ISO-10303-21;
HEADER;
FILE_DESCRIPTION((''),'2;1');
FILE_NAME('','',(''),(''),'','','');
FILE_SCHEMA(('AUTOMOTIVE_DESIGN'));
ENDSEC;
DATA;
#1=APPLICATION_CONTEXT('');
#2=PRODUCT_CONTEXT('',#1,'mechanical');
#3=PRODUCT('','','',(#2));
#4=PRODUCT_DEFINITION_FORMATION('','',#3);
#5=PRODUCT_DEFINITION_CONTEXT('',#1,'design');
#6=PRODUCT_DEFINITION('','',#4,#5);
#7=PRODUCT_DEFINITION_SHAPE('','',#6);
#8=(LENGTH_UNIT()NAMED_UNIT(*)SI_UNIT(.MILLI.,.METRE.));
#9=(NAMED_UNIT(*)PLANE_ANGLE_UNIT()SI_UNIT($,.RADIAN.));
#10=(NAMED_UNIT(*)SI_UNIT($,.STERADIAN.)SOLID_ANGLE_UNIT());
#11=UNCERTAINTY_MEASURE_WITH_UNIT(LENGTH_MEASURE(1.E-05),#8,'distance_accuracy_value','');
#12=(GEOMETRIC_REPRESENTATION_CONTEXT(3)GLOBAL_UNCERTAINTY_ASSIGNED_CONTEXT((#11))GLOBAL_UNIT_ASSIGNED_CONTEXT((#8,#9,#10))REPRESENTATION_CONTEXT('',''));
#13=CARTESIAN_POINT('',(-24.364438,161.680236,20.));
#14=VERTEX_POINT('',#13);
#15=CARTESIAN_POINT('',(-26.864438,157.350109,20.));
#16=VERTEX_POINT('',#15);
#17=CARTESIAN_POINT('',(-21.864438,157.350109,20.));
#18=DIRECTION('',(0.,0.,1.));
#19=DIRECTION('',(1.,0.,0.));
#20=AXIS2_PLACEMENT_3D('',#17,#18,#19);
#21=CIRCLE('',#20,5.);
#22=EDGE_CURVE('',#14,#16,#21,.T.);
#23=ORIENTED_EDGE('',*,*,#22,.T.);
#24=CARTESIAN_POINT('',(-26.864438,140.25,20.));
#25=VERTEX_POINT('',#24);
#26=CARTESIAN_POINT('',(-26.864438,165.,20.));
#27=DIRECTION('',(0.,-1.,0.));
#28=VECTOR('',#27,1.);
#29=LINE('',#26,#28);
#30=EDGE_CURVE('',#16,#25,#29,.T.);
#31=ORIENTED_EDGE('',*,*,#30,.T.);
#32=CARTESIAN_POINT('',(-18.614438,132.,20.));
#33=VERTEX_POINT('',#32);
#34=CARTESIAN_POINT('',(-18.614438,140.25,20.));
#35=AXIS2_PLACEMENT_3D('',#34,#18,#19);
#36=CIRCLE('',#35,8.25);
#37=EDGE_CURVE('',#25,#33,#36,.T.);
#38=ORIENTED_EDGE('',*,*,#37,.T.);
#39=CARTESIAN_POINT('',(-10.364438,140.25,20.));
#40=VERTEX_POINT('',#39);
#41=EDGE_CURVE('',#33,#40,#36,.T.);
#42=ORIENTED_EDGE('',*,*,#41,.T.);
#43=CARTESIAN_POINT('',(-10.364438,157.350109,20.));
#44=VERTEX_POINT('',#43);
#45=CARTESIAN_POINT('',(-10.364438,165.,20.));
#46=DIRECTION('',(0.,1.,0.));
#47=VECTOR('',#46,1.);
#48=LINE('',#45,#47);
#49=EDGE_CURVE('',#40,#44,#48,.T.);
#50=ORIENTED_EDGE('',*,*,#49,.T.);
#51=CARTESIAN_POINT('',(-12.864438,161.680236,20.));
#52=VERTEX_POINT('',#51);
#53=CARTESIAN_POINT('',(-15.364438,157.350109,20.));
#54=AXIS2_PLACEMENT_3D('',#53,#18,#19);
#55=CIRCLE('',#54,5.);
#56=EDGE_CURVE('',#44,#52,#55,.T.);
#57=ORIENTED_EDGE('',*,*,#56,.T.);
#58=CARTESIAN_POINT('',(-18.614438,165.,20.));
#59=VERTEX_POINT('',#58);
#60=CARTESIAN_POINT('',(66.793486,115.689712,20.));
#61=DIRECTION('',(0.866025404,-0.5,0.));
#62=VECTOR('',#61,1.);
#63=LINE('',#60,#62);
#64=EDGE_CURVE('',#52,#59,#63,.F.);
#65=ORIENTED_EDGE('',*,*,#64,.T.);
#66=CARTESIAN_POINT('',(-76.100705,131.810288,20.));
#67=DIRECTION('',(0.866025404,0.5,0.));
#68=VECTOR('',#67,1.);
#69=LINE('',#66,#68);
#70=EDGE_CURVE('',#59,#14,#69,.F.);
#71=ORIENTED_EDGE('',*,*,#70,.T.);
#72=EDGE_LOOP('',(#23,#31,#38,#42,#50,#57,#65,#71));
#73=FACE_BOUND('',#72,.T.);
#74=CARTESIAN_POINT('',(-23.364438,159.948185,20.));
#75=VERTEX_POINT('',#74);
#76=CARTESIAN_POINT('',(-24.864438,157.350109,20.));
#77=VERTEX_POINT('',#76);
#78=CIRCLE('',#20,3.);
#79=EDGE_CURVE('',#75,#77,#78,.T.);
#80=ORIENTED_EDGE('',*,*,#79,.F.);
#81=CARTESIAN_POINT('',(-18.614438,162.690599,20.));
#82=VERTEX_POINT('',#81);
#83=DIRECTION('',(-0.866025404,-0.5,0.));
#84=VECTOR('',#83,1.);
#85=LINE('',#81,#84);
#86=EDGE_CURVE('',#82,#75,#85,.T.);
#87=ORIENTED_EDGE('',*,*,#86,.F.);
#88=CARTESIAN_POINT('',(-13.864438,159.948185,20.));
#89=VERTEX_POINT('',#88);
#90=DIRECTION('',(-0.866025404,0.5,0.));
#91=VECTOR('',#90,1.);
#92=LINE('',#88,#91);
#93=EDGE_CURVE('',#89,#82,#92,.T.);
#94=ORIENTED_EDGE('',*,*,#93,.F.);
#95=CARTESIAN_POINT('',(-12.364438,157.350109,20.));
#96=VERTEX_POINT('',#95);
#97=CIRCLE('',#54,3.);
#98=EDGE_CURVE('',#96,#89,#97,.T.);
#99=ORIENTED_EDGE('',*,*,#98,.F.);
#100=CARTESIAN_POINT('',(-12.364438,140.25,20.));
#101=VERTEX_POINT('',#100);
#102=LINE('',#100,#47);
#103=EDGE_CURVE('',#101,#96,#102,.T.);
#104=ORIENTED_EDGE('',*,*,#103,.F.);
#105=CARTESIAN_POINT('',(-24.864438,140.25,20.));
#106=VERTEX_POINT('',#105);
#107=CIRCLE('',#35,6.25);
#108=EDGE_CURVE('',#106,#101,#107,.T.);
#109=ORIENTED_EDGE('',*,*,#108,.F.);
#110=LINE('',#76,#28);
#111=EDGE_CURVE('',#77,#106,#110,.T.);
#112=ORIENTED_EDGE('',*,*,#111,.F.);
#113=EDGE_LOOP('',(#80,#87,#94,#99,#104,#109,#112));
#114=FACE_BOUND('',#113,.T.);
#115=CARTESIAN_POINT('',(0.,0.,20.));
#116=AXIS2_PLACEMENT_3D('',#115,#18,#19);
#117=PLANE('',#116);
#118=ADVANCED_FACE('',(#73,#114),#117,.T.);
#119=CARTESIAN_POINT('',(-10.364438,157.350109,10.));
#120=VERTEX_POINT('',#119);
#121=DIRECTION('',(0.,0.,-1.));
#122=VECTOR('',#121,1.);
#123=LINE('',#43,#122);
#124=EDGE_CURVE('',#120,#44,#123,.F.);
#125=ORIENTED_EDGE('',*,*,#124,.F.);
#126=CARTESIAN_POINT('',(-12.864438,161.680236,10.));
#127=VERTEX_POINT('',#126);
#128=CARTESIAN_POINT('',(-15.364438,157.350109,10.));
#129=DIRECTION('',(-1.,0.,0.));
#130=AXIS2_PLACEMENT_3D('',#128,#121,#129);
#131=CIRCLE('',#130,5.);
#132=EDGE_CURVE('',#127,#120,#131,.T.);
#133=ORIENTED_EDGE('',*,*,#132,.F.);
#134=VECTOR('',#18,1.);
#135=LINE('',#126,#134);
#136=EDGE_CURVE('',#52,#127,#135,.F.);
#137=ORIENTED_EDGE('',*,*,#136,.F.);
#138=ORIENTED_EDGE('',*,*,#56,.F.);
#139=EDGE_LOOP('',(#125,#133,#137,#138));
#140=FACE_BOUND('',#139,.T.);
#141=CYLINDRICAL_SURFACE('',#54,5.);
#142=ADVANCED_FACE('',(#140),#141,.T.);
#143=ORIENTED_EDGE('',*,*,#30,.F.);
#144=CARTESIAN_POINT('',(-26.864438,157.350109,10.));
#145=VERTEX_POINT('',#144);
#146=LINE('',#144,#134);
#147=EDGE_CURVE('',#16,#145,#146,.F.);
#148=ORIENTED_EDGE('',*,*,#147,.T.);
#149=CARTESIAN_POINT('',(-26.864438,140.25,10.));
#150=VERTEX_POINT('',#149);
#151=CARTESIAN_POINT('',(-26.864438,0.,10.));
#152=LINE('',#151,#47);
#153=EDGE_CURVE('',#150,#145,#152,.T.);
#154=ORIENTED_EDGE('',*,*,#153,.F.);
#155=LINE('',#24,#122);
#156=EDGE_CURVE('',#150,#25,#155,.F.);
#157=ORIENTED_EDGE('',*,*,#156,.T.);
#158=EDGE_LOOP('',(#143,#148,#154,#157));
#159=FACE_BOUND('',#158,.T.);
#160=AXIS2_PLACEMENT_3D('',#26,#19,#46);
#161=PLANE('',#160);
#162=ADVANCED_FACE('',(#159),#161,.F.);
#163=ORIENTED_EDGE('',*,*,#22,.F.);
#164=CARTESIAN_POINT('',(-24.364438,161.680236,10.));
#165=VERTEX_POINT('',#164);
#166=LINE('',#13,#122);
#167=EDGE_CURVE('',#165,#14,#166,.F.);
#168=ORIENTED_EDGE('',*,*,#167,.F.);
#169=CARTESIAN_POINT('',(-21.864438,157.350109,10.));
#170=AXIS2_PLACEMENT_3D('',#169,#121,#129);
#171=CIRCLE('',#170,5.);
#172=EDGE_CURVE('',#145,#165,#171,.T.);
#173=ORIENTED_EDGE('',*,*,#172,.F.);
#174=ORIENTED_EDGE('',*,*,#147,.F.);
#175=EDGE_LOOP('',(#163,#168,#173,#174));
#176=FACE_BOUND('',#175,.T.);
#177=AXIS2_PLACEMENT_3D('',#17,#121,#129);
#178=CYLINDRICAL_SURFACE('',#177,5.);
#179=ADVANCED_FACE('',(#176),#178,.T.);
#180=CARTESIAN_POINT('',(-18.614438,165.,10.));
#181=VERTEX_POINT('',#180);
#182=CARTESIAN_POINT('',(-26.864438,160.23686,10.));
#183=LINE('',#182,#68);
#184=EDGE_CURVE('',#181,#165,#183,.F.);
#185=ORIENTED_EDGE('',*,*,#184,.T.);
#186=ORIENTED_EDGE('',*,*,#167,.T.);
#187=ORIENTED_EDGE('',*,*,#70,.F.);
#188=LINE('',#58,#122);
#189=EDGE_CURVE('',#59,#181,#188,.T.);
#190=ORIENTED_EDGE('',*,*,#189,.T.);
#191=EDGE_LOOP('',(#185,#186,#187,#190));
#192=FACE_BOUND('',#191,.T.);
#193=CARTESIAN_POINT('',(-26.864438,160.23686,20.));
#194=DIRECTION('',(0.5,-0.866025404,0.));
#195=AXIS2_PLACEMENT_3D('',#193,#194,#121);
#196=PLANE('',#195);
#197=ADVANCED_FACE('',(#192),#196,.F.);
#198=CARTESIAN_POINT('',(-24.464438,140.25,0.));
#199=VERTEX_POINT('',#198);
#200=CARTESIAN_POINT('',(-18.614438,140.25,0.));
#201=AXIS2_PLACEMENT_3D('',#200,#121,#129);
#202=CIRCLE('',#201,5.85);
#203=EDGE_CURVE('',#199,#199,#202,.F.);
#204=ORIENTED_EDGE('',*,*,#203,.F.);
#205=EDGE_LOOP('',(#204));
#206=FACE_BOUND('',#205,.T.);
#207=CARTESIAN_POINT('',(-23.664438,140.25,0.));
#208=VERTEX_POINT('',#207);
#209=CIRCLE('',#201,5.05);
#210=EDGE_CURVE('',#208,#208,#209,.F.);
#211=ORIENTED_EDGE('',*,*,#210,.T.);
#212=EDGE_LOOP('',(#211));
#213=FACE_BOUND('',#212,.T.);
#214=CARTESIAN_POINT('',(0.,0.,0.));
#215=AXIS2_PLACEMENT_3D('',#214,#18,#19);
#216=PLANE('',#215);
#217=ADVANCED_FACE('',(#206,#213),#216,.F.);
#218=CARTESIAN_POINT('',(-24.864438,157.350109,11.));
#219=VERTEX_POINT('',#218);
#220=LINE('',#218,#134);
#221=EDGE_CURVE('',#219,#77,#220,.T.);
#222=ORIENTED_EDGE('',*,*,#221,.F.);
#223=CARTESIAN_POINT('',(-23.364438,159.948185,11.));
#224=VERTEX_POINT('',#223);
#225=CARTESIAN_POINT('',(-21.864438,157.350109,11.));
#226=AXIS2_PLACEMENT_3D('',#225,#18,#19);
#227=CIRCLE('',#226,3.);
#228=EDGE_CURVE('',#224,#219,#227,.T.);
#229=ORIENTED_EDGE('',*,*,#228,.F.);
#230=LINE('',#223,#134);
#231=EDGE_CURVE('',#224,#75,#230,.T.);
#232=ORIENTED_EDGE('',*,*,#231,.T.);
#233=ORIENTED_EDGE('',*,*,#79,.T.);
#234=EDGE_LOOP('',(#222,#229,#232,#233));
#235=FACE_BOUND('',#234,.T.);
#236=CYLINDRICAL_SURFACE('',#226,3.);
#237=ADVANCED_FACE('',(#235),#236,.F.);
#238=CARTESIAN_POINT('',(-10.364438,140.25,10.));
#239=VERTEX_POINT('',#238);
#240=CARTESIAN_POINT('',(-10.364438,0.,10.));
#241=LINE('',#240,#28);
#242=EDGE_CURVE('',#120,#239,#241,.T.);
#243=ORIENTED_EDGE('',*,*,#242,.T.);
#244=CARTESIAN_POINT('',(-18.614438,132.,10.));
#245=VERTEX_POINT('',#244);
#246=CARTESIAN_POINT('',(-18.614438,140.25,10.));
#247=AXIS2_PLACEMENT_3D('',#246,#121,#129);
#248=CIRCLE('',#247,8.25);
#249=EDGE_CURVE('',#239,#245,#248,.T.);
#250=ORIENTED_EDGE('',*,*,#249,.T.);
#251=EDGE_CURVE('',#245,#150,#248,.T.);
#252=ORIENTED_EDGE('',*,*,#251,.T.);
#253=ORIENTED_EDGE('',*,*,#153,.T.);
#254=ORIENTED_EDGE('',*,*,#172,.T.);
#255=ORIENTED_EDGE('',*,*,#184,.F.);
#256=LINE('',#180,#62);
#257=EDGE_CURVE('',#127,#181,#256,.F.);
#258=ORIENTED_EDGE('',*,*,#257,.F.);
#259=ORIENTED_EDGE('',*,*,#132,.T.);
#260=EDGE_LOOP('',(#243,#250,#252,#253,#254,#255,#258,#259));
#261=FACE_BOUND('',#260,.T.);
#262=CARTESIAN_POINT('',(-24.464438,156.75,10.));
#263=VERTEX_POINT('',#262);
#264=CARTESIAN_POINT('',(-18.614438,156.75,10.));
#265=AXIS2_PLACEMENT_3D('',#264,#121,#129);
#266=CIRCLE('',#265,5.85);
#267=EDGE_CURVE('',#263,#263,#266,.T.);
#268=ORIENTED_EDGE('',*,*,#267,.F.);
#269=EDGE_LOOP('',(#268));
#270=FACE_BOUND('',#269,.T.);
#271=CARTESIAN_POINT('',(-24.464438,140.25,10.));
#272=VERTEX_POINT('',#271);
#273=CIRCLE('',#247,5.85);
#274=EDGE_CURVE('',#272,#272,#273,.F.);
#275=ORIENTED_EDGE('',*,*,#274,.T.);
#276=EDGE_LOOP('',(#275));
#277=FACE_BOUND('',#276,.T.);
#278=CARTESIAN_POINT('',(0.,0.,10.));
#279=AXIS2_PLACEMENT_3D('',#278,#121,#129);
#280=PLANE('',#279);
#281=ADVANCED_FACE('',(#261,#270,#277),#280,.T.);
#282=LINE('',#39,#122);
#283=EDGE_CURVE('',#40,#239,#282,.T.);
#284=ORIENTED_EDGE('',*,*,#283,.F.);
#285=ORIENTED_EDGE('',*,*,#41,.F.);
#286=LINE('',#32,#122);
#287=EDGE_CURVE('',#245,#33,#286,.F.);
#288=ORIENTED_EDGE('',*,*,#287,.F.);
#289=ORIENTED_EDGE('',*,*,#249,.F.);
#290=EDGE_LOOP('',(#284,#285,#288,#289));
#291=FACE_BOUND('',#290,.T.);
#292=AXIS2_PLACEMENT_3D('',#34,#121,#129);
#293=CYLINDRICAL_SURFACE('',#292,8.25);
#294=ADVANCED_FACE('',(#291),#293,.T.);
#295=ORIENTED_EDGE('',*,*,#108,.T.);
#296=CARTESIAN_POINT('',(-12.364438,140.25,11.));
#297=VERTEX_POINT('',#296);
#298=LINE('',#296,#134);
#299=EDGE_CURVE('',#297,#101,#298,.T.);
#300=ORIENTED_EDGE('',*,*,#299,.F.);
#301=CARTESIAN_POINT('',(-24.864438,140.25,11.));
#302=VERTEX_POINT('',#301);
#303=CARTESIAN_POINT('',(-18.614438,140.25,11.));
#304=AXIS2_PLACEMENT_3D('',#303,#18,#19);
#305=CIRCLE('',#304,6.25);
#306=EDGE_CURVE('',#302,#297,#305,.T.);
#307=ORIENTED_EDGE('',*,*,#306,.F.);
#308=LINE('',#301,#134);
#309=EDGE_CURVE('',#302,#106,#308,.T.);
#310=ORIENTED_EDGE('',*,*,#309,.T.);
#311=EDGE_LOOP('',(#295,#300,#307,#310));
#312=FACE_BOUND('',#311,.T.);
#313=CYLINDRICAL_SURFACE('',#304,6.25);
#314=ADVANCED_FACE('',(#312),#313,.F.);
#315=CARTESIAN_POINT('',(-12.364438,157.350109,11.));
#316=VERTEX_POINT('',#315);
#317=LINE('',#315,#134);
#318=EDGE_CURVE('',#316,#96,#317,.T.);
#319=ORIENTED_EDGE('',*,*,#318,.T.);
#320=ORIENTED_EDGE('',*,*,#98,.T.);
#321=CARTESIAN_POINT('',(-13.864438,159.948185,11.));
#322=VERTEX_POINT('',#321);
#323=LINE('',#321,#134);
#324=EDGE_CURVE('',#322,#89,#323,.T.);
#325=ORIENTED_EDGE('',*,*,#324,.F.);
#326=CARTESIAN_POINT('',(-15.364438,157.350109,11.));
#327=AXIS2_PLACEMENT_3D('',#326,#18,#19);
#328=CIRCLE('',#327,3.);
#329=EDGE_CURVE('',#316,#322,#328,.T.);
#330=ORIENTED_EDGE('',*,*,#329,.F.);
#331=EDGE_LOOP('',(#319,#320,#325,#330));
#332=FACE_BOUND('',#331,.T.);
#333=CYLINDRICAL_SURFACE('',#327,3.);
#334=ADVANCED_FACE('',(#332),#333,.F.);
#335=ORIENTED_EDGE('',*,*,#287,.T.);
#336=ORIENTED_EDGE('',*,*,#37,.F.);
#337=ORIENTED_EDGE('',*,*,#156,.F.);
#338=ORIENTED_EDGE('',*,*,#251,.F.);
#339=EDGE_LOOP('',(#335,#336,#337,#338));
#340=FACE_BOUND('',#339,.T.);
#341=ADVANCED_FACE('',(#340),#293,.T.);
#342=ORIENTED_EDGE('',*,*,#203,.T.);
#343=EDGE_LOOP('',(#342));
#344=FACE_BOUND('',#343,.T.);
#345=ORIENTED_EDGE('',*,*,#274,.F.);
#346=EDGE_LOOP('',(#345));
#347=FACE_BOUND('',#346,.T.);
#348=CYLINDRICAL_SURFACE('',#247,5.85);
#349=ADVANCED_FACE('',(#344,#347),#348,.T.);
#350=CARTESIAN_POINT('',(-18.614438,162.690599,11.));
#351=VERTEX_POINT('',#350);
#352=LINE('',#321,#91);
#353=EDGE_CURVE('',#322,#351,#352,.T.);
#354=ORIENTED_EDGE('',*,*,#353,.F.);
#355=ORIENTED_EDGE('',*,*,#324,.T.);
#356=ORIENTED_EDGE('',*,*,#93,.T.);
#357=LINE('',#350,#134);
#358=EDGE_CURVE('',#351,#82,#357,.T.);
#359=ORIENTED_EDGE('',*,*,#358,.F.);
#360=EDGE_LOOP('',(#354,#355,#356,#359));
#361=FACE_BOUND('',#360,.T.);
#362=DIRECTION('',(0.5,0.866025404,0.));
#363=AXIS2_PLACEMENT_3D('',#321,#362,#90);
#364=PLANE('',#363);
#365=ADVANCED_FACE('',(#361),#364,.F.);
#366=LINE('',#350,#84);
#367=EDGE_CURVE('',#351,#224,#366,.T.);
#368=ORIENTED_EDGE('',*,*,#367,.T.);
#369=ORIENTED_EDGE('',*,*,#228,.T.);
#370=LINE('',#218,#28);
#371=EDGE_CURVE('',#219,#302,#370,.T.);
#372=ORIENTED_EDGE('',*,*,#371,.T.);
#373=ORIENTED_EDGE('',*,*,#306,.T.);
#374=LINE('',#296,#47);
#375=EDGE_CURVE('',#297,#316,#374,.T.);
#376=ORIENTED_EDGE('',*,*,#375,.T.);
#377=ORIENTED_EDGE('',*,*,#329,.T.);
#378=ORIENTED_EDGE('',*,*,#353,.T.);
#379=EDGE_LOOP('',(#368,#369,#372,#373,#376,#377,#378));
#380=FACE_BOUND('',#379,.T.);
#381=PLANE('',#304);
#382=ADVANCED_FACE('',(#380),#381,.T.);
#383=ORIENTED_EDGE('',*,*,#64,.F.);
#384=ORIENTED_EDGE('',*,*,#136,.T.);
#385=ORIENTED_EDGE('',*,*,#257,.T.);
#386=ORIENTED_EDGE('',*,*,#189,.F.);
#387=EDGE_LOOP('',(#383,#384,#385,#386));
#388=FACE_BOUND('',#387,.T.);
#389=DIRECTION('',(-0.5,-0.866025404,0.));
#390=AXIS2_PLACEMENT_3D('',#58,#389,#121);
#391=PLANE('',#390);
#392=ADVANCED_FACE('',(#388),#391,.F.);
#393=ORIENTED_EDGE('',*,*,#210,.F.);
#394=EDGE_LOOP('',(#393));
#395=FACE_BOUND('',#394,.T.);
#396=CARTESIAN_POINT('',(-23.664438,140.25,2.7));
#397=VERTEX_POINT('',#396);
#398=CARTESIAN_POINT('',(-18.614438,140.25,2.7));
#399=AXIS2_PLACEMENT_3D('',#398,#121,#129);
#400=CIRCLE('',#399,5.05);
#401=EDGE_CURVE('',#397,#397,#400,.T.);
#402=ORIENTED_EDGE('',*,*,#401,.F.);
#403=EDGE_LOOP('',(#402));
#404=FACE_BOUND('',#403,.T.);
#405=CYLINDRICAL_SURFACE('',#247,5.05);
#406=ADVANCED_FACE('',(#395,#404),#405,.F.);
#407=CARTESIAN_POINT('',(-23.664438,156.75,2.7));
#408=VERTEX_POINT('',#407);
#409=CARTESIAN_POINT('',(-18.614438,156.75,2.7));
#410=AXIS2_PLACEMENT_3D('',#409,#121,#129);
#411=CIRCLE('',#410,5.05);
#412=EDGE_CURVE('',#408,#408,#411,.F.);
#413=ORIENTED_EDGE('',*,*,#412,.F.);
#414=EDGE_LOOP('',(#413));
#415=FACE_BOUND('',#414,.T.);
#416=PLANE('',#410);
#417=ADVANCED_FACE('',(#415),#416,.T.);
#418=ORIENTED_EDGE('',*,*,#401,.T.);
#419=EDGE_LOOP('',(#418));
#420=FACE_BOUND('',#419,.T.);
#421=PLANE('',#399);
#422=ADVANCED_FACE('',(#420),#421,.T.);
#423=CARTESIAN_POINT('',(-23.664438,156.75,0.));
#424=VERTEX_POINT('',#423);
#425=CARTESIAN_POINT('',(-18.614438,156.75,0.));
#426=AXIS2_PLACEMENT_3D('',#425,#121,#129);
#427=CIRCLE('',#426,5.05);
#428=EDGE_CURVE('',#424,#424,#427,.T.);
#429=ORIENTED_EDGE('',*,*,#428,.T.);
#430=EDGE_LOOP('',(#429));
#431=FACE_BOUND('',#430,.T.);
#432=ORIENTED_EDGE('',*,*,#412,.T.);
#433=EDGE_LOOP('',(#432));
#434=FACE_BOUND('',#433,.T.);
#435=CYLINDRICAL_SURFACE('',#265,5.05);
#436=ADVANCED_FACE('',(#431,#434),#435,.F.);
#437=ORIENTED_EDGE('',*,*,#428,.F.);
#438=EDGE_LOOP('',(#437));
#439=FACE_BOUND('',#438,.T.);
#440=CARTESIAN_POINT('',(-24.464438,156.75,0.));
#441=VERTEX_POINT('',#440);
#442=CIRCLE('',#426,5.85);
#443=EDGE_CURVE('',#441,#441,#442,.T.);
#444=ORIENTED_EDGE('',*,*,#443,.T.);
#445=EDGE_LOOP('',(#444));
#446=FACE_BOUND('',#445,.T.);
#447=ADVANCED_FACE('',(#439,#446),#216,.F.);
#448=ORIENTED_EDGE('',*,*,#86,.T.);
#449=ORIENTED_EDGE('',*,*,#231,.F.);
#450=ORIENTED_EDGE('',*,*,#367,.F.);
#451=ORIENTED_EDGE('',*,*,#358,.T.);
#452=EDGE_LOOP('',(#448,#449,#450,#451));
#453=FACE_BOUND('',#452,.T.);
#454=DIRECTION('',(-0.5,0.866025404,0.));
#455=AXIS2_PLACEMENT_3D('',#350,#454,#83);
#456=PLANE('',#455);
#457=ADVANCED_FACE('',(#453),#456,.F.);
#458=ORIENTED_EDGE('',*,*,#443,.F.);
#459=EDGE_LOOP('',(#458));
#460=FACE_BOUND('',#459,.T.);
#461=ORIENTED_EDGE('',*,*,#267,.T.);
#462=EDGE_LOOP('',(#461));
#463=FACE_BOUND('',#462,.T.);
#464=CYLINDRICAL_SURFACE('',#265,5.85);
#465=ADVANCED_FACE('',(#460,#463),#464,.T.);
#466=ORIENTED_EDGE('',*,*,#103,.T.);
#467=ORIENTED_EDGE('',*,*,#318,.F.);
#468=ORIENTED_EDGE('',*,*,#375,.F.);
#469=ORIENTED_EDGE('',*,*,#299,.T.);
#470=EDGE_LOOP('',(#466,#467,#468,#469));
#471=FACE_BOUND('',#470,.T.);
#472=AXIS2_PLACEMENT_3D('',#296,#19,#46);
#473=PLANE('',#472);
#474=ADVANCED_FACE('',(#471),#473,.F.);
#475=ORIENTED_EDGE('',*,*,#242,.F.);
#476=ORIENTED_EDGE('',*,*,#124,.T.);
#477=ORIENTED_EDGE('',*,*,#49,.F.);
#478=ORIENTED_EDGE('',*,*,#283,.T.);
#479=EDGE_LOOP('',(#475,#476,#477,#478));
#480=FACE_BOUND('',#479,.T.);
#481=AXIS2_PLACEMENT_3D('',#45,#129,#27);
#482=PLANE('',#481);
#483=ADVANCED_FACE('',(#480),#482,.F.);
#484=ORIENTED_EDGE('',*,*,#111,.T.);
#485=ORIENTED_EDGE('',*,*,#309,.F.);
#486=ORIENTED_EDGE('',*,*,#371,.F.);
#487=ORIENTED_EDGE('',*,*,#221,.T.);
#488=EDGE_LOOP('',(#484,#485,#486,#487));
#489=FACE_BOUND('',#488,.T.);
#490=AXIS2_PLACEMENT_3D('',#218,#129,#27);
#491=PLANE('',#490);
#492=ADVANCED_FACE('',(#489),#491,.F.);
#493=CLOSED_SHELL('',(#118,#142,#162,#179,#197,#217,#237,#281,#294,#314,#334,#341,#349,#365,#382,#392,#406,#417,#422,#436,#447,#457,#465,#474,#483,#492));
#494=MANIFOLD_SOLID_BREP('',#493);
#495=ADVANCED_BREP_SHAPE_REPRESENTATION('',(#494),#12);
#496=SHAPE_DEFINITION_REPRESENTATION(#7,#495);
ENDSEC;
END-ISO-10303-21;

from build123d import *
from OCP.BRepFilletAPI import BRepFilletAPI_MakeChamfer

# Parameters (mm, degrees)
SKETCH1_W                       = 16.5
SKETCH1_H                       = 33
BOSS_EXTRUDE1_DEPTH             = 20
FILLET1_R                       = 8.25
CHAMFER1_SIZE                   = 8.25
CHAMFER1_SIZE_2                 = 4.763139721
SKETCH2_W                       = 16.5
SKETCH2_H                       = 33
SKETCH2_R                       = 5.85
SKETCH2_R_2                     = 5.05
CUT_EXTRUDE1_DEPTH              = 10
FILLET2_R                       = 5
SKETCH4_R                       = 5.1
BOSS_EXTRUDE2_DEPTH             = 7.3
SCHNITT_LINEAR_AUSTRAGEN1_DEPTH = 9


with BuildPart() as part:
    # Sketch1 → Boss-Extrude1 (new body)
    with BuildSketch(Plane.XY):
        with Locations((-18.614437814, 148.5)):
            Rectangle(SKETCH1_W, SKETCH1_H)
    extrude(amount=BOSS_EXTRUDE1_DEPTH)

    # Fillet1
    fillet1_edges = [part.edges().sort_by_distance(p)[0] for p in [
        (-26.864437814, 132, 10),
        (-10.364437814, 132, 10),
    ]]
    fillet(fillet1_edges, radius=FILLET1_R - 0.0001)  # a hair under: the kernel refuses the full size

    # Chamfer1
    chamfer1_edges_1 = [part.edges().sort_by_distance(p)[0] for p in [
        (-26.864437814, 165, 10),
    ]]
    chamfer1_side_1 = [part.faces().sort_by_distance(p)[0] for p in [
        (-26.769175019, 165, 10),
    ]]
    chamfer1_edges_2 = [part.edges().sort_by_distance(p)[0] for p in [
        (-10.364437814, 165, 10),
    ]]
    chamfer1_side_2 = [part.faces().sort_by_distance(p)[0] for p in [
        (-10.364437814, 164.904737206, 10),
    ]]
    chamfer1 = BRepFilletAPI_MakeChamfer(part.part.solid().wrapped)
    for e in chamfer1_edges_1:
        chamfer1.Add(CHAMFER1_SIZE - 0.0001, CHAMFER1_SIZE_2 - 0.0001, e.wrapped, chamfer1_side_1[0].wrapped)
    for e in chamfer1_edges_2:
        chamfer1.Add(CHAMFER1_SIZE_2 - 0.0001, CHAMFER1_SIZE - 0.0001, e.wrapped, chamfer1_side_2[0].wrapped)
    add(Compound.cast(chamfer1.Shape()), mode=Mode.REPLACE)  # a hair under: the kernel refuses the full size

    # Sketch2 → Cut-Extrude1 (cut)
    # profile 1 of 3: a face of its own
    with BuildSketch(Plane(origin=(0, 0, 0), x_dir=(-1, 0, 0), z_dir=(0, 0, -1))):
        with Locations((18.614437814, 148.5)):
            Rectangle(SKETCH2_W, SKETCH2_H)
        with Locations((18.614437814, 156.75)):
            Circle(SKETCH2_R, mode=Mode.SUBTRACT)
        with Locations((18.614437814, 140.25)):
            Circle(SKETCH2_R, mode=Mode.SUBTRACT)
    # profile 2 of 3: a face of its own
    with BuildSketch(Plane(origin=(0, 0, 0), x_dir=(-1, 0, 0), z_dir=(0, 0, -1))):
        with Locations((18.614437814, 140.25)):
            Circle(SKETCH2_R_2)
    # profile 3 of 3: a face of its own
    with BuildSketch(Plane(origin=(0, 0, 0), x_dir=(-1, 0, 0), z_dir=(0, 0, -1))):
        with Locations((18.614437814, 156.75)):
            Circle(SKETCH2_R_2)
    extrude(amount=-CUT_EXTRUDE1_DEPTH, mode=Mode.SUBTRACT)

    # Fillet2
    fillet2_edges = [part.edges().sort_by_distance(p)[0] for p in [
        (-26.864437814, 160.236960279, 15),
        (-10.364437814, 160.236960279, 15),
    ]]
    fillet(fillet2_edges, radius=FILLET2_R)

    # Sketch4 → Boss-Extrude2 (add)
    with BuildSketch(Plane(origin=(0, 0, 10), x_dir=(-1, 0, 0), z_dir=(0, 0, -1))):
        with Locations((18.614437814, 156.75)):
            Circle(SKETCH4_R)
        with Locations((18.614437814, 140.25)):
            Circle(SKETCH4_R)
    extrude(amount=BOSS_EXTRUDE2_DEPTH)

    # Skizze1 → Schnitt-Linear austragen1 (cut)
    with BuildSketch(Plane.XY.offset(20)):
        with BuildLine():
            Line((-12.364437814, 140.25), (-12.364437814, 157.350108933))
            ThreePointArc((-12.364437814, 157.350108933), (-12.766361602, 158.850108933), (-13.864437814, 159.948185145))
            Line((-13.864437814, 159.948185145), (-18.614437814, 162.690598923))
            Line((-18.614437814, 162.690598923), (-23.364437814, 159.948185145))
            ThreePointArc((-23.364437814, 159.948185145), (-24.462514025, 158.850108933), (-24.864437814, 157.350108933))
            Line((-24.864437814, 157.350108933), (-24.864437814, 140.25))
            ThreePointArc((-24.864437814, 140.25), (-23.033855196, 135.830582618), (-18.614437814, 134))
            ThreePointArc((-18.614437814, 134), (-14.195020431, 135.830582618), (-12.364437814, 140.25))
        make_face()
    extrude(amount=-SCHNITT_LINEAR_AUSTRAGEN1_DEPTH, mode=Mode.SUBTRACT)


solid = part.part
